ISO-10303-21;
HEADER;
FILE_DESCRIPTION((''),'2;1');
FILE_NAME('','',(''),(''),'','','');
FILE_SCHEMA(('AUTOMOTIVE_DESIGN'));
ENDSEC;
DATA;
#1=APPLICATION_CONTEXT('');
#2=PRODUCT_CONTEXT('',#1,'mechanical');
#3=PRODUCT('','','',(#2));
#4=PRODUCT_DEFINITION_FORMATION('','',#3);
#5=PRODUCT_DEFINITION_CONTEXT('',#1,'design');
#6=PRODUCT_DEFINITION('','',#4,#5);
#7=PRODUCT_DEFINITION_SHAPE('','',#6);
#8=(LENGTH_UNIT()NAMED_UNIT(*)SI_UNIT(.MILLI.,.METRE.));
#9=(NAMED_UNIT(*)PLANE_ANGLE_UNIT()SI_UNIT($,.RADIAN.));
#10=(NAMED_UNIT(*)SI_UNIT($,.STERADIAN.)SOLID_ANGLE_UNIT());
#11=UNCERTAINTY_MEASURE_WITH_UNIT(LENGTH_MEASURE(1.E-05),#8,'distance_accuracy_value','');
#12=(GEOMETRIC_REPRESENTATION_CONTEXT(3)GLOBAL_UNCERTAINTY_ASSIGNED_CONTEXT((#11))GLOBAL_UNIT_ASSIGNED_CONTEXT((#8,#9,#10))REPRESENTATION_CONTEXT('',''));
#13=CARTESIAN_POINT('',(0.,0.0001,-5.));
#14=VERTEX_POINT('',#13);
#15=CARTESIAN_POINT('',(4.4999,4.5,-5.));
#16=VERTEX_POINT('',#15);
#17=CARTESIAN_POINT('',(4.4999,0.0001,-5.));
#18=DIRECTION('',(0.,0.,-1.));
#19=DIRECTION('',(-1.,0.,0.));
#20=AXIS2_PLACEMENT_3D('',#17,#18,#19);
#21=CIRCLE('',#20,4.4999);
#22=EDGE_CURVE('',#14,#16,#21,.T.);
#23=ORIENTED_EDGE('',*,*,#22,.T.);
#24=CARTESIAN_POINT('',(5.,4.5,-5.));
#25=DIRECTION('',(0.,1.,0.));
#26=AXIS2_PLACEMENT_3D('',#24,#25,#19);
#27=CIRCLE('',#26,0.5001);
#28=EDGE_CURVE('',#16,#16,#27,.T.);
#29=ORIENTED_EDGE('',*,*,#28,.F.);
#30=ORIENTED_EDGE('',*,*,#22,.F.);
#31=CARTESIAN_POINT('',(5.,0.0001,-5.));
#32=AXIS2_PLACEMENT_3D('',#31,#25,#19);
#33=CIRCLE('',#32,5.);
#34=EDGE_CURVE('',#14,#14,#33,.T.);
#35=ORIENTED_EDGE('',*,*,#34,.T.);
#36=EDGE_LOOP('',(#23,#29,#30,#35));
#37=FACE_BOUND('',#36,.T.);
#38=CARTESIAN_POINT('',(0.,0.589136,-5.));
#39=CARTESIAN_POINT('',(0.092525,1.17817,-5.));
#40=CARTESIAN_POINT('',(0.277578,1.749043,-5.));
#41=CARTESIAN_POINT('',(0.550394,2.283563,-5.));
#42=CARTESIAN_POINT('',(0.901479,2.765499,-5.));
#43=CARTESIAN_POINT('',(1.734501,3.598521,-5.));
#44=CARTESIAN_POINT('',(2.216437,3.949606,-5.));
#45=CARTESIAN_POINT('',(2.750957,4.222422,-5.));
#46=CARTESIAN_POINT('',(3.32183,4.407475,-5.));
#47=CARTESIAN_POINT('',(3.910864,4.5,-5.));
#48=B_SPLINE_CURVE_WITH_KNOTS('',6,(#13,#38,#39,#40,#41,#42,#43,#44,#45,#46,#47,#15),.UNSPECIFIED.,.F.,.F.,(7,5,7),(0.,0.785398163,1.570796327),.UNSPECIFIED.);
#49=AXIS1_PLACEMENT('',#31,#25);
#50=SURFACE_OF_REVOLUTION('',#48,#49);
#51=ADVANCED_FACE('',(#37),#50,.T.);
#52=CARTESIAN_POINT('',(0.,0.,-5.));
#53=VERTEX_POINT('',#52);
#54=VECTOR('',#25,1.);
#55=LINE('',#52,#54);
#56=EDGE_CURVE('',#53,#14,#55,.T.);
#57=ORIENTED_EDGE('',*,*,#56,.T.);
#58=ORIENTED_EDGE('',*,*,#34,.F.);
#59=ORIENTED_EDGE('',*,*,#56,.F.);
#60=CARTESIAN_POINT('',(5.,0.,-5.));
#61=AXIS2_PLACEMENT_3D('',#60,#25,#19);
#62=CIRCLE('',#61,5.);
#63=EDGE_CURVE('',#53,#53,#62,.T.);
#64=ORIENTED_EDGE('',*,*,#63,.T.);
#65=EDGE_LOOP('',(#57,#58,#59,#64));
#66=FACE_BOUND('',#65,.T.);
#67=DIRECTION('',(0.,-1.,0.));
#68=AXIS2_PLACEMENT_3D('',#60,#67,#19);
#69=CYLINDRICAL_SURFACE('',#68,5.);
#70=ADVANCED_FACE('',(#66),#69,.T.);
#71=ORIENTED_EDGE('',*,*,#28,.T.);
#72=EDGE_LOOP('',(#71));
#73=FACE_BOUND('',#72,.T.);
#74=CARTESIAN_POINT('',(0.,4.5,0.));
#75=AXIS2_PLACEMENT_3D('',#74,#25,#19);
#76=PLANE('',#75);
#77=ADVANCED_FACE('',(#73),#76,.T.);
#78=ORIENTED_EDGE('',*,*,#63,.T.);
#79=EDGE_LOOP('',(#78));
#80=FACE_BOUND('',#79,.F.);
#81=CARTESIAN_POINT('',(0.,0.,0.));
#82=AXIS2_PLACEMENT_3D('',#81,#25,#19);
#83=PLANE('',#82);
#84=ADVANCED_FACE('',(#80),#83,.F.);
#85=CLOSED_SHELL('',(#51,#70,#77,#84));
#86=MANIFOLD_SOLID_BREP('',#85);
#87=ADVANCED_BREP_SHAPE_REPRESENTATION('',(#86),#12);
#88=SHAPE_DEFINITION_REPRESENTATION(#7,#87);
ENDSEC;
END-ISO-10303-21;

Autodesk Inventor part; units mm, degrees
ref_plane "YZ Plane" through (0, 0, 0) normal (1, 0, 0) x (0, 1, 0)
ref_plane "XZ Plane" through (0, 0, 0) normal (0, 1, 0) x (-1, 0, 0)
ref_plane "XY Plane" through (0, 0, 0) normal (0, 0, 1) x (1, 0, 0)
sketch "Szkic2" plane through (0, 0, 0) normal (0, 1, 0) x (-1, 0, 0)
  line L0 (0, 0) -> (-10, 0)
  line L1 (-10, 0) -> (-10, -10)
  line L2 (-10, -10) -> (0, -10)
  line L3 (0, -10) -> (0, 0)
  circle A0 centre (-5, -5) radius 5
  dimension "d14" = 10
  dimension "d15" = 10
sketch "Szkic2 outline for Wyciągnięcie proste4" plane through (0, 0, 0) normal (0, 1, 0) x (-1, 0, 0)
  circle A0 centre (-5, -5) radius 5
extrude "Wyciągnięcie proste4" add sketch "Szkic2 outline for Wyciągnięcie proste4" along normal blind 4.5
fillet "Zaokrąglenie1" radius 4.5 1 edges at (10, 4.5, -5)
properties part number "Kulka"
